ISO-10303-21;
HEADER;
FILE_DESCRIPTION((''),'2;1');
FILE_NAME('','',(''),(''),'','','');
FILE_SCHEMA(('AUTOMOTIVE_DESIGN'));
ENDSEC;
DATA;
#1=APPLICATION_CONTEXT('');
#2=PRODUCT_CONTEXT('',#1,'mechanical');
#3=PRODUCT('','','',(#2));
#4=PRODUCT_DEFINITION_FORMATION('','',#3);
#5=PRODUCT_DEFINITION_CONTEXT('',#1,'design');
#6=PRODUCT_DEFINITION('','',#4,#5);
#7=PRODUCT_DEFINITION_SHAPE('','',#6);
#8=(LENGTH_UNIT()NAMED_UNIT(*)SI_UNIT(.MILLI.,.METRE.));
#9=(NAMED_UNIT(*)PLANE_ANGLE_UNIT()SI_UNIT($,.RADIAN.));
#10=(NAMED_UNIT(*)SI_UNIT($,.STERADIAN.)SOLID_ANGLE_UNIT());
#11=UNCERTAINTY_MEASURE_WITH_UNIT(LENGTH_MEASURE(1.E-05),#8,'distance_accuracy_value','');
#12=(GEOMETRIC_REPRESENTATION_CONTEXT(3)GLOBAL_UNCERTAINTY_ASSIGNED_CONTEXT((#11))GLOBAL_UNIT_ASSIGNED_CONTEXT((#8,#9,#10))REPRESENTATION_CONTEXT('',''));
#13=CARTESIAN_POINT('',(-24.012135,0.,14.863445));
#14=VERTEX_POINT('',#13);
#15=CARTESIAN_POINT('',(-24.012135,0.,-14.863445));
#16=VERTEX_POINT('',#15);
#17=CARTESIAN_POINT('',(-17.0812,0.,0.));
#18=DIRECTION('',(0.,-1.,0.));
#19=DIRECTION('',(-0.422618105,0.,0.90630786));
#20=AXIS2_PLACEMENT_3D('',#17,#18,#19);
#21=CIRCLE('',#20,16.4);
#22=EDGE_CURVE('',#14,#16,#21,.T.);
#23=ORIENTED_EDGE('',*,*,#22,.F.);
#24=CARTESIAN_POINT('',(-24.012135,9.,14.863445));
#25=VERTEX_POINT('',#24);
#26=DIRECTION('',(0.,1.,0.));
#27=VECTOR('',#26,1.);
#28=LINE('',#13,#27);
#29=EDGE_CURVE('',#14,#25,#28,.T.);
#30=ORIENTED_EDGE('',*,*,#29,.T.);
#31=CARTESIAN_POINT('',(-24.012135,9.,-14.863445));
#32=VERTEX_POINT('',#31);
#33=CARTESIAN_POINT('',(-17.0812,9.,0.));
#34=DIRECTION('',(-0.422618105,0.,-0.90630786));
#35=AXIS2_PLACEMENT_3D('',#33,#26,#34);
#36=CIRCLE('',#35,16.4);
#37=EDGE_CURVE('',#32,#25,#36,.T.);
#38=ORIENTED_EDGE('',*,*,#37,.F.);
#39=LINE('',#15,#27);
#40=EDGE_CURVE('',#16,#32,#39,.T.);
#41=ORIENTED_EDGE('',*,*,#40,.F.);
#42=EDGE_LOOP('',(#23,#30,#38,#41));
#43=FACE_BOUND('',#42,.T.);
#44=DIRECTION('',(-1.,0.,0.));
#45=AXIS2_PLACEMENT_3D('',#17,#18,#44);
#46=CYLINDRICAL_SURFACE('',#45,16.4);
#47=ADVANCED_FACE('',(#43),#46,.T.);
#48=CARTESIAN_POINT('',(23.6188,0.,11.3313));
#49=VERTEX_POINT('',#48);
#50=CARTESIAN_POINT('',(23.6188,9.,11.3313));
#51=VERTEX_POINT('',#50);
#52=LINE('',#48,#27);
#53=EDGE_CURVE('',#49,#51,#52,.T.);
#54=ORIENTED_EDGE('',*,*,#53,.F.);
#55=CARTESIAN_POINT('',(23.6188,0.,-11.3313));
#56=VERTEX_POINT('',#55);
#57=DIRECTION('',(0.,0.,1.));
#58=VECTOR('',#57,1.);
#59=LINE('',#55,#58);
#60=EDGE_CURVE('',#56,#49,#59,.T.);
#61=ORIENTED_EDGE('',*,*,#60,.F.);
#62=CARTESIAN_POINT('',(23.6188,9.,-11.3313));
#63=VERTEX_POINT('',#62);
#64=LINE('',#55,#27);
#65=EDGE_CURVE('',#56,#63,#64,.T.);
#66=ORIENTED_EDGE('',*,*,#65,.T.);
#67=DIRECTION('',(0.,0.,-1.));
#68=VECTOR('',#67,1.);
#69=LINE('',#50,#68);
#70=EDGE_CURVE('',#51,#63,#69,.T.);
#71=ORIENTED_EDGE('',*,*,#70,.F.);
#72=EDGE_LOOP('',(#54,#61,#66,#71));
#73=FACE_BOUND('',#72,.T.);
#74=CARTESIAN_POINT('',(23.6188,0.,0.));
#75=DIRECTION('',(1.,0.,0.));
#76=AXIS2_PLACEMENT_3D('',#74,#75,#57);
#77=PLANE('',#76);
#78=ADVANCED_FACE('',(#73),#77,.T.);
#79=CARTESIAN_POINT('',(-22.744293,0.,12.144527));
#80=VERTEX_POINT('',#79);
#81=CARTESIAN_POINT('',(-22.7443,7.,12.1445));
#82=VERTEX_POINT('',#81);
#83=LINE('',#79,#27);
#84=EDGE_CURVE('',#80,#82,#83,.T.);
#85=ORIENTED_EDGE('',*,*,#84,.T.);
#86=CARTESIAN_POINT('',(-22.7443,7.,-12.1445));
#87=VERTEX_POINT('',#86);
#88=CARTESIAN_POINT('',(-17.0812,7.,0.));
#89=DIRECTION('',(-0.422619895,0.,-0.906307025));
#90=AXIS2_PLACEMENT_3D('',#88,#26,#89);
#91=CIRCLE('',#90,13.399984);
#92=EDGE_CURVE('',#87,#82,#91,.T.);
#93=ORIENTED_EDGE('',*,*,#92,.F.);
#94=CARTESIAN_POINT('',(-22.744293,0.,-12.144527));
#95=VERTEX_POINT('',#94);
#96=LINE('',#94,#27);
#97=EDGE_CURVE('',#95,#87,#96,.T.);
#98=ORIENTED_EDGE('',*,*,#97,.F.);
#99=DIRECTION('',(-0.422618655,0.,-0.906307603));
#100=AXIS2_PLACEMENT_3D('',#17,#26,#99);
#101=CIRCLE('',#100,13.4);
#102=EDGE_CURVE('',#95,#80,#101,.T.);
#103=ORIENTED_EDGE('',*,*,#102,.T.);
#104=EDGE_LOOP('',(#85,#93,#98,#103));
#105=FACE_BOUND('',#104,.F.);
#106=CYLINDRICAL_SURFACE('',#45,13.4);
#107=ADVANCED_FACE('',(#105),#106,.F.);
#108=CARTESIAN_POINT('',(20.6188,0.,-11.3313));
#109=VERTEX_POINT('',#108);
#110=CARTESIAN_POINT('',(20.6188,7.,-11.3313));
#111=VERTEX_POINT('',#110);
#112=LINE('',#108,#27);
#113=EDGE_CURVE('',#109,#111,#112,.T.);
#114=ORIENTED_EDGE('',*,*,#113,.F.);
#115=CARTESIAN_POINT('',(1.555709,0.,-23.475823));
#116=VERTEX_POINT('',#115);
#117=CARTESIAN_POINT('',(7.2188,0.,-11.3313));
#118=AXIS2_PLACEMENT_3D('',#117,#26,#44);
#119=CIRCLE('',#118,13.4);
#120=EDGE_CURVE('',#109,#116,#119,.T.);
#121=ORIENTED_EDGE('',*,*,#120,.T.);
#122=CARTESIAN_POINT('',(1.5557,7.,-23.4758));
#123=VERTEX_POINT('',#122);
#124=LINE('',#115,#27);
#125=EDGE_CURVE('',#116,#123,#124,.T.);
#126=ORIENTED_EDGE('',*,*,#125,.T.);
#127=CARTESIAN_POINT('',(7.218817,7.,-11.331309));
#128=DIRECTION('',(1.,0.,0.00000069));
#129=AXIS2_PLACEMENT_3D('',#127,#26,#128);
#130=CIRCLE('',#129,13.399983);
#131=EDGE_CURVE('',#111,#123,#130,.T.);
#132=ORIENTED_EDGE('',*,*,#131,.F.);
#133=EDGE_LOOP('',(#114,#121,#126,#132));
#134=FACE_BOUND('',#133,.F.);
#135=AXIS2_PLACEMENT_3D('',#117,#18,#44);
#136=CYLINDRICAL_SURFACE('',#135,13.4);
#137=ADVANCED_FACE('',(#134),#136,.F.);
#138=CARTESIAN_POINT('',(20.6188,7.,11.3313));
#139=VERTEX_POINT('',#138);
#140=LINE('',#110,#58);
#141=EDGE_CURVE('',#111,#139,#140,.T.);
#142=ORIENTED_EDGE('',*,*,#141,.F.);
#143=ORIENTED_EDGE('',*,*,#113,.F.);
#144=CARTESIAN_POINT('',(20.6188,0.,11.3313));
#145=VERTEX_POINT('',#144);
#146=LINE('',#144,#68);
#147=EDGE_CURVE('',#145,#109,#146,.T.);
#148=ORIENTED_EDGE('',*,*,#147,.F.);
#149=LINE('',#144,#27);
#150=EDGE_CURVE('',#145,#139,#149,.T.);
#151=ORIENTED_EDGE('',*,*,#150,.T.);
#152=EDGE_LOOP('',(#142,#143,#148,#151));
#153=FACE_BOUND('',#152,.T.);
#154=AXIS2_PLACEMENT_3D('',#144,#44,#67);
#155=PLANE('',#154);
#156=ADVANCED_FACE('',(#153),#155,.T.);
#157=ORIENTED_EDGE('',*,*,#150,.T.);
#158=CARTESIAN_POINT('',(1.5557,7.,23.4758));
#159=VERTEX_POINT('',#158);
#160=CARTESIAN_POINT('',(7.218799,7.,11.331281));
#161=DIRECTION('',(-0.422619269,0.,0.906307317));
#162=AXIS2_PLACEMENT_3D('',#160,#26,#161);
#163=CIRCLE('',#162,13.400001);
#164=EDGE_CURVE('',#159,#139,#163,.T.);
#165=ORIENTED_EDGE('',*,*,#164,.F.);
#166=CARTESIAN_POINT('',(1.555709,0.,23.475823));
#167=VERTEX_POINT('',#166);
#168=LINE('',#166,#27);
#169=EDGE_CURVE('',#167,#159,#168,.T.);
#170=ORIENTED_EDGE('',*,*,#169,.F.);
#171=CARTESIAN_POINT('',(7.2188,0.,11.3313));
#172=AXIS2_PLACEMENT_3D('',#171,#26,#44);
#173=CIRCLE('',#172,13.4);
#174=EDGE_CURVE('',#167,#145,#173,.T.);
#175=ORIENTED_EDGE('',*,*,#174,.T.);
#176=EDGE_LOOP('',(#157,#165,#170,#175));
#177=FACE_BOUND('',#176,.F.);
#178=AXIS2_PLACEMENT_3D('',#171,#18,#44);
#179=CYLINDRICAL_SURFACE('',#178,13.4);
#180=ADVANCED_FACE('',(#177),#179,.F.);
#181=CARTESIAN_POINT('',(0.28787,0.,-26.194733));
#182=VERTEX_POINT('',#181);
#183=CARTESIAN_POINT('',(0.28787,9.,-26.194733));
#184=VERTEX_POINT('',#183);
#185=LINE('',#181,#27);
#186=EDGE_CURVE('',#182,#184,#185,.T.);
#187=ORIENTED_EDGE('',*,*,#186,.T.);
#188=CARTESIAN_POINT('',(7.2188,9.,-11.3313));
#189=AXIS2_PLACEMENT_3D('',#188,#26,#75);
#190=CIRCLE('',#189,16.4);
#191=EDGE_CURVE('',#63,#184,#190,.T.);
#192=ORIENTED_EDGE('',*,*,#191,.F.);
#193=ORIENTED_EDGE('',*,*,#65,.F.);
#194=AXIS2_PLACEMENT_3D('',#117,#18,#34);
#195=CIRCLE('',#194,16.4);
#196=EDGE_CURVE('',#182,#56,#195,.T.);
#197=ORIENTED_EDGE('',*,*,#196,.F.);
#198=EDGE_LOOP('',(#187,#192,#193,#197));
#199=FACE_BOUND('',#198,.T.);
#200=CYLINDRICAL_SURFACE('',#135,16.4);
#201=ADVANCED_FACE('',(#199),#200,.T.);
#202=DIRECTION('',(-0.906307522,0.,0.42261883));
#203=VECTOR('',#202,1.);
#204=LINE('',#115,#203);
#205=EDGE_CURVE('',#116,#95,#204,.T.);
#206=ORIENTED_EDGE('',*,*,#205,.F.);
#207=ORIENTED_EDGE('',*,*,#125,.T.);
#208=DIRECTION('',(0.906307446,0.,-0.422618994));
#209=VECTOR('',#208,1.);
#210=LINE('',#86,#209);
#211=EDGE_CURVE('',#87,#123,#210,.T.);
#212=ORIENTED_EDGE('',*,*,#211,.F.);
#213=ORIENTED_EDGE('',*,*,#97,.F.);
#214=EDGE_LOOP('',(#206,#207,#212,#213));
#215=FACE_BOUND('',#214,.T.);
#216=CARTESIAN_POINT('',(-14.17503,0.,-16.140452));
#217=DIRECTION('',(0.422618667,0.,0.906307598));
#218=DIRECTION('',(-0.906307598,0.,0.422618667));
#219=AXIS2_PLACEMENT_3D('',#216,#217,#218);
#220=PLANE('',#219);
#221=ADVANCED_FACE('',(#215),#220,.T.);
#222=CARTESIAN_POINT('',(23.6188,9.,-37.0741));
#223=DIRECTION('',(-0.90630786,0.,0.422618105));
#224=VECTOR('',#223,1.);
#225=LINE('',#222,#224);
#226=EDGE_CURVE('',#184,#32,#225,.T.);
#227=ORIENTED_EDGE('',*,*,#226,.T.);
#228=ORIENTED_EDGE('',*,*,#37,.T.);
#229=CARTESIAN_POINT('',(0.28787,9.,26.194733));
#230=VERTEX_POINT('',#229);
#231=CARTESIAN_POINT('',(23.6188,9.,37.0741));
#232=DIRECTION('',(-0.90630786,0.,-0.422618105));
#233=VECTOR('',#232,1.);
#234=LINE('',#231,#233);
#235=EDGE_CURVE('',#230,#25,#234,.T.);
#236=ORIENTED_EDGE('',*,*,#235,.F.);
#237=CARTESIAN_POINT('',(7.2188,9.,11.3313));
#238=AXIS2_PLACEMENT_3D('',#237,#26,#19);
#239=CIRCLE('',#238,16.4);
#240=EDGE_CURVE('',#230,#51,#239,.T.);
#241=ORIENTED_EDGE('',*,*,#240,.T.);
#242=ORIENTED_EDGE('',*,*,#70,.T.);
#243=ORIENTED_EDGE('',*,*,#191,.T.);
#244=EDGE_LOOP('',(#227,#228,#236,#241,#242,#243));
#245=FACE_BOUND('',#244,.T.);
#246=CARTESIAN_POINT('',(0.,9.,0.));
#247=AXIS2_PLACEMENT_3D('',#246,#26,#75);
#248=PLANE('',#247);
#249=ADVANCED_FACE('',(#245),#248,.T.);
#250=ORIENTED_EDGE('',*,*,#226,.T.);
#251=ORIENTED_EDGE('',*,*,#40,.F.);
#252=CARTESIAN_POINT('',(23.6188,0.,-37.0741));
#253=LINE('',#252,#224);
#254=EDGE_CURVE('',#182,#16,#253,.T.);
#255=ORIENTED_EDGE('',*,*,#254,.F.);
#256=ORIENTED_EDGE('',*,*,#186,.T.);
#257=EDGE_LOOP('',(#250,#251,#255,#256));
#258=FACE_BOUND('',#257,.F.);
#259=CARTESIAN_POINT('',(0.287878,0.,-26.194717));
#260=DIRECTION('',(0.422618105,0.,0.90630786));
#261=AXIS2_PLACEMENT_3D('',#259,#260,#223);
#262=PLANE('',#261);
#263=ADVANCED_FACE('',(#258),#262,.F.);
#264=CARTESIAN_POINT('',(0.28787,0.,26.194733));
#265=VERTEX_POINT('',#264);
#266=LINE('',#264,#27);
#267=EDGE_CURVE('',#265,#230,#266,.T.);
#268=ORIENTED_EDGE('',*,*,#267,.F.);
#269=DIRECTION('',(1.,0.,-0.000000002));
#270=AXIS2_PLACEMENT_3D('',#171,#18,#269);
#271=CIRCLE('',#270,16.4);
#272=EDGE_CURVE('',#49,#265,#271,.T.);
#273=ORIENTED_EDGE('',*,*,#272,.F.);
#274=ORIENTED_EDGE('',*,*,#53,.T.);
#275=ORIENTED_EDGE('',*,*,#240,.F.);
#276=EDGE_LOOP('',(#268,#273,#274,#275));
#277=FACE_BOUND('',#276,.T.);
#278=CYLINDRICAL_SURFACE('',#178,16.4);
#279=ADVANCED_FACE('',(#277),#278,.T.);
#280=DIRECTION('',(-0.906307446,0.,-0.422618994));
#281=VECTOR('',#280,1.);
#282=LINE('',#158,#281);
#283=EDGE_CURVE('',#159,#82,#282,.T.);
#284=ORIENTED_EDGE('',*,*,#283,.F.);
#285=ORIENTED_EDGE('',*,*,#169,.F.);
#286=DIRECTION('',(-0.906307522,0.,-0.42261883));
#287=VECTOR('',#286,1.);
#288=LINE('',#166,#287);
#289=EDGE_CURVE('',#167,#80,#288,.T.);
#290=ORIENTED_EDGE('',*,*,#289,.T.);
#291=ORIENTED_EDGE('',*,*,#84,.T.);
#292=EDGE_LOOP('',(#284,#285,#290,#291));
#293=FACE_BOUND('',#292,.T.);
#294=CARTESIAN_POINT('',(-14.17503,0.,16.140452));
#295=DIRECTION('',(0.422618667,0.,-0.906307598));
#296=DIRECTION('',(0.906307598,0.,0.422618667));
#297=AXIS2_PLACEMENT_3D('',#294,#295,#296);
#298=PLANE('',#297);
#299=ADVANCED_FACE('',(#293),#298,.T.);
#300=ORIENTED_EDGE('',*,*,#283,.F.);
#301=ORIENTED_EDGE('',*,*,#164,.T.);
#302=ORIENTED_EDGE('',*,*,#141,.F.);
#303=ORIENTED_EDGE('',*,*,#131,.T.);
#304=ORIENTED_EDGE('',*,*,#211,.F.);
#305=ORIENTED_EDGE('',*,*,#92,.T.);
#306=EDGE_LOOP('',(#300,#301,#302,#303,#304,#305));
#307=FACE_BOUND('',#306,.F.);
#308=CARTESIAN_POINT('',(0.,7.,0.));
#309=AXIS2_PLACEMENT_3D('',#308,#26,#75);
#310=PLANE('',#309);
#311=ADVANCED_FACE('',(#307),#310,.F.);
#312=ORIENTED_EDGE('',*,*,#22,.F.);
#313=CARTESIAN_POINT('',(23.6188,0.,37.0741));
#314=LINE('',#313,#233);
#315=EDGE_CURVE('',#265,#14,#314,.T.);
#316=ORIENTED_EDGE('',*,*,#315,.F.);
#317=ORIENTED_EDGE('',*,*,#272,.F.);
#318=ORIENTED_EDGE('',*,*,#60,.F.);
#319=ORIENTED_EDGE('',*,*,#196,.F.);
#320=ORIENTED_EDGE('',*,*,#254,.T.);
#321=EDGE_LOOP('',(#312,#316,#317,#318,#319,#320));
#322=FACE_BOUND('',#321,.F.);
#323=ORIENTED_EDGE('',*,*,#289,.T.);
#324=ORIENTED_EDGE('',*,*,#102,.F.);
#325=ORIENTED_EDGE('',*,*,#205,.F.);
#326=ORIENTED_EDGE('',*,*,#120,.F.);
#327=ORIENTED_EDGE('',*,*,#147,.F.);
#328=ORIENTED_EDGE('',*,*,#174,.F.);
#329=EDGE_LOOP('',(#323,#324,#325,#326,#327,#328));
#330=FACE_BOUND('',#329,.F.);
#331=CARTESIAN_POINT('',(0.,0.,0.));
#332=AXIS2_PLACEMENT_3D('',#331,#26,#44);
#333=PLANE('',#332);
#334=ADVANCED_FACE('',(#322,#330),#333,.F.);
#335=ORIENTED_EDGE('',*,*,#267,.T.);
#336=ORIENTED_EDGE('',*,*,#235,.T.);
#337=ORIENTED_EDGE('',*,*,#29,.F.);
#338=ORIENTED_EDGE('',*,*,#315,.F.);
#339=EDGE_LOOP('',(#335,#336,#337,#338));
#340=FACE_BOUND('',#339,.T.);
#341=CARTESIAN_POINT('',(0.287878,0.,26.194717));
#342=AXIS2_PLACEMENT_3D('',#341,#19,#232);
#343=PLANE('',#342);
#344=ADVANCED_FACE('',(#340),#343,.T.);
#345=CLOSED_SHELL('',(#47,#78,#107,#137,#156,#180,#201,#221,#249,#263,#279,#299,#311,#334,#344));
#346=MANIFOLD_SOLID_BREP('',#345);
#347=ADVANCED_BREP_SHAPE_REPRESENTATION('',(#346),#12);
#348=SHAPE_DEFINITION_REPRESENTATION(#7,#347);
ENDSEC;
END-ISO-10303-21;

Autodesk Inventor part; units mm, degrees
ref_plane "YZ Plane" through (0, 0, 0) normal (1, 0, 0) x (0, 1, 0)
ref_plane "XZ Plane" through (0, 0, 0) normal (0, 1, 0) x (-1, 0, 0)
ref_plane "XY Plane" through (0, 0, 0) normal (0, 0, 1) x (1, 0, 0)
sketch "Sketch1" plane through (0, 0, 0) normal (0, 1, 0) x (-1, 0, 0)
  line L0 (72.8792, 0) -> (-46.0667, 0) projected
  line L1 (48.7883, 0) -> (-20.6188, 32.3651)
  line L2 (-20.6188, 32.3651) -> (-20.6188, -32.3651)
  line L3 (-20.6188, -32.3651) -> (48.7883, 0)
  circle A0 centre (-7.2188, -11.3313) radius 13.4
  circle A1 centre (-7.2188, 11.3313) radius 13.4
  circle A2 centre (17.0812, 0) radius 13.4
  circle A3 centre (0, 0) radius 20.6188
  line L4 (52.8138, 0) -> (-29.0745, 0)
  line L5 (-23.6188, -37.0741) -> (-23.6188, 37.0741)
  line L6 (-23.6188, 37.0741) -> (55.8869, 0)
  line L7 (-23.6188, -37.0741) -> (55.8869, 0)
  circle A4 centre (-7.2188, 11.3313) radius 16.4
  circle A5 centre (-7.2188, -11.3313) radius 16.4
  circle A6 centre (17.0812, 0) radius 16.4
  point P0 (-1.5557, -23.4758)
  point P1 (-20.6188, -11.3313)
  point P2 (-20.6188, 11.3313)
  point P3 (-1.5557, 23.4758)
  point P4 (22.7443, 12.1445)
  point P5 (22.7443, -12.1445)
  point P6 (-0.2879, -26.1947)
  point P7 (24.0121, -14.8634)
  point P8 (24.0121, 14.8634)
  point P9 (-0.2879, 26.1947)
  point P10 (-23.6188, 11.3313)
  point P11 (-23.6188, -11.3313)
  dimension "d9" = 50
  dimension "d10" = 26.8
  dimension "d11" = 37.7
  dimension "d12" = 26.8
  dimension "d13" = 26.8
  dimension "d14" = 3
  dimension "d15" = 3
extrude "Extrusion1" add sketch "Sketch1" along normal blind 9 contours A6 L1 A4 L6 | A6 L1 | L7 A5 L3 A6 | A6 L3 | A4 L1 | A6 L0 A2 L1 | A5 L3 | L3 A2 L0 A6 | L1 A1 L2 A4 | A5 L2 A0 L3 | A4 L2 L0 L5 | A4 L2 | L5 L0 L2 A5 | A5 L2
sketch "Sketch2" plane through (0, 9, 0) normal (0, 1, 0) x (1, 0, 0)
  line L0 (0.2879, 26.1947) -> (-24.0121, 14.8634) projected
  arc A0 (23.6188, 11.3313) -> (0.2879, 26.1947) centre (7.2188, 11.3313) ccw projected
  line L1 (23.6188, -11.3313) -> (23.6188, 11.3313) projected
  arc A1 (0.2879, -26.1947) -> (23.6188, -11.3313) centre (7.2188, -11.3313) ccw projected
  line L2 (-24.0121, -14.8634) -> (0.2879, -26.1947) projected
  arc A2 (-24.0121, 14.8634) -> (-24.0121, -14.8634) centre (-17.0812, 0) ccw projected
  arc A3 (20.6188, 11.3313) -> (1.5557, 23.4758) centre (7.2188, 11.3313) ccw projected
  line L3 (-22.7443, 12.1445) -> (1.5557, 23.4758) projected
  arc A4 (-22.7443, 12.1445) -> (-22.7443, -12.1445) centre (-17.0812, 0) ccw projected
  line L4 (1.5557, -23.4758) -> (-22.7443, -12.1445) projected
  arc A5 (1.5557, -23.4758) -> (20.6188, -11.3313) centre (7.2188, -11.3313) ccw projected
  line L5 (20.6188, 11.3313) -> (20.6188, -11.3313) projected
extrude "Extrusion2" add sketch "Sketch2" against normal blind 2 contours L5 A5 L4 A4 L3 A3
properties part number "Tri_Box"
